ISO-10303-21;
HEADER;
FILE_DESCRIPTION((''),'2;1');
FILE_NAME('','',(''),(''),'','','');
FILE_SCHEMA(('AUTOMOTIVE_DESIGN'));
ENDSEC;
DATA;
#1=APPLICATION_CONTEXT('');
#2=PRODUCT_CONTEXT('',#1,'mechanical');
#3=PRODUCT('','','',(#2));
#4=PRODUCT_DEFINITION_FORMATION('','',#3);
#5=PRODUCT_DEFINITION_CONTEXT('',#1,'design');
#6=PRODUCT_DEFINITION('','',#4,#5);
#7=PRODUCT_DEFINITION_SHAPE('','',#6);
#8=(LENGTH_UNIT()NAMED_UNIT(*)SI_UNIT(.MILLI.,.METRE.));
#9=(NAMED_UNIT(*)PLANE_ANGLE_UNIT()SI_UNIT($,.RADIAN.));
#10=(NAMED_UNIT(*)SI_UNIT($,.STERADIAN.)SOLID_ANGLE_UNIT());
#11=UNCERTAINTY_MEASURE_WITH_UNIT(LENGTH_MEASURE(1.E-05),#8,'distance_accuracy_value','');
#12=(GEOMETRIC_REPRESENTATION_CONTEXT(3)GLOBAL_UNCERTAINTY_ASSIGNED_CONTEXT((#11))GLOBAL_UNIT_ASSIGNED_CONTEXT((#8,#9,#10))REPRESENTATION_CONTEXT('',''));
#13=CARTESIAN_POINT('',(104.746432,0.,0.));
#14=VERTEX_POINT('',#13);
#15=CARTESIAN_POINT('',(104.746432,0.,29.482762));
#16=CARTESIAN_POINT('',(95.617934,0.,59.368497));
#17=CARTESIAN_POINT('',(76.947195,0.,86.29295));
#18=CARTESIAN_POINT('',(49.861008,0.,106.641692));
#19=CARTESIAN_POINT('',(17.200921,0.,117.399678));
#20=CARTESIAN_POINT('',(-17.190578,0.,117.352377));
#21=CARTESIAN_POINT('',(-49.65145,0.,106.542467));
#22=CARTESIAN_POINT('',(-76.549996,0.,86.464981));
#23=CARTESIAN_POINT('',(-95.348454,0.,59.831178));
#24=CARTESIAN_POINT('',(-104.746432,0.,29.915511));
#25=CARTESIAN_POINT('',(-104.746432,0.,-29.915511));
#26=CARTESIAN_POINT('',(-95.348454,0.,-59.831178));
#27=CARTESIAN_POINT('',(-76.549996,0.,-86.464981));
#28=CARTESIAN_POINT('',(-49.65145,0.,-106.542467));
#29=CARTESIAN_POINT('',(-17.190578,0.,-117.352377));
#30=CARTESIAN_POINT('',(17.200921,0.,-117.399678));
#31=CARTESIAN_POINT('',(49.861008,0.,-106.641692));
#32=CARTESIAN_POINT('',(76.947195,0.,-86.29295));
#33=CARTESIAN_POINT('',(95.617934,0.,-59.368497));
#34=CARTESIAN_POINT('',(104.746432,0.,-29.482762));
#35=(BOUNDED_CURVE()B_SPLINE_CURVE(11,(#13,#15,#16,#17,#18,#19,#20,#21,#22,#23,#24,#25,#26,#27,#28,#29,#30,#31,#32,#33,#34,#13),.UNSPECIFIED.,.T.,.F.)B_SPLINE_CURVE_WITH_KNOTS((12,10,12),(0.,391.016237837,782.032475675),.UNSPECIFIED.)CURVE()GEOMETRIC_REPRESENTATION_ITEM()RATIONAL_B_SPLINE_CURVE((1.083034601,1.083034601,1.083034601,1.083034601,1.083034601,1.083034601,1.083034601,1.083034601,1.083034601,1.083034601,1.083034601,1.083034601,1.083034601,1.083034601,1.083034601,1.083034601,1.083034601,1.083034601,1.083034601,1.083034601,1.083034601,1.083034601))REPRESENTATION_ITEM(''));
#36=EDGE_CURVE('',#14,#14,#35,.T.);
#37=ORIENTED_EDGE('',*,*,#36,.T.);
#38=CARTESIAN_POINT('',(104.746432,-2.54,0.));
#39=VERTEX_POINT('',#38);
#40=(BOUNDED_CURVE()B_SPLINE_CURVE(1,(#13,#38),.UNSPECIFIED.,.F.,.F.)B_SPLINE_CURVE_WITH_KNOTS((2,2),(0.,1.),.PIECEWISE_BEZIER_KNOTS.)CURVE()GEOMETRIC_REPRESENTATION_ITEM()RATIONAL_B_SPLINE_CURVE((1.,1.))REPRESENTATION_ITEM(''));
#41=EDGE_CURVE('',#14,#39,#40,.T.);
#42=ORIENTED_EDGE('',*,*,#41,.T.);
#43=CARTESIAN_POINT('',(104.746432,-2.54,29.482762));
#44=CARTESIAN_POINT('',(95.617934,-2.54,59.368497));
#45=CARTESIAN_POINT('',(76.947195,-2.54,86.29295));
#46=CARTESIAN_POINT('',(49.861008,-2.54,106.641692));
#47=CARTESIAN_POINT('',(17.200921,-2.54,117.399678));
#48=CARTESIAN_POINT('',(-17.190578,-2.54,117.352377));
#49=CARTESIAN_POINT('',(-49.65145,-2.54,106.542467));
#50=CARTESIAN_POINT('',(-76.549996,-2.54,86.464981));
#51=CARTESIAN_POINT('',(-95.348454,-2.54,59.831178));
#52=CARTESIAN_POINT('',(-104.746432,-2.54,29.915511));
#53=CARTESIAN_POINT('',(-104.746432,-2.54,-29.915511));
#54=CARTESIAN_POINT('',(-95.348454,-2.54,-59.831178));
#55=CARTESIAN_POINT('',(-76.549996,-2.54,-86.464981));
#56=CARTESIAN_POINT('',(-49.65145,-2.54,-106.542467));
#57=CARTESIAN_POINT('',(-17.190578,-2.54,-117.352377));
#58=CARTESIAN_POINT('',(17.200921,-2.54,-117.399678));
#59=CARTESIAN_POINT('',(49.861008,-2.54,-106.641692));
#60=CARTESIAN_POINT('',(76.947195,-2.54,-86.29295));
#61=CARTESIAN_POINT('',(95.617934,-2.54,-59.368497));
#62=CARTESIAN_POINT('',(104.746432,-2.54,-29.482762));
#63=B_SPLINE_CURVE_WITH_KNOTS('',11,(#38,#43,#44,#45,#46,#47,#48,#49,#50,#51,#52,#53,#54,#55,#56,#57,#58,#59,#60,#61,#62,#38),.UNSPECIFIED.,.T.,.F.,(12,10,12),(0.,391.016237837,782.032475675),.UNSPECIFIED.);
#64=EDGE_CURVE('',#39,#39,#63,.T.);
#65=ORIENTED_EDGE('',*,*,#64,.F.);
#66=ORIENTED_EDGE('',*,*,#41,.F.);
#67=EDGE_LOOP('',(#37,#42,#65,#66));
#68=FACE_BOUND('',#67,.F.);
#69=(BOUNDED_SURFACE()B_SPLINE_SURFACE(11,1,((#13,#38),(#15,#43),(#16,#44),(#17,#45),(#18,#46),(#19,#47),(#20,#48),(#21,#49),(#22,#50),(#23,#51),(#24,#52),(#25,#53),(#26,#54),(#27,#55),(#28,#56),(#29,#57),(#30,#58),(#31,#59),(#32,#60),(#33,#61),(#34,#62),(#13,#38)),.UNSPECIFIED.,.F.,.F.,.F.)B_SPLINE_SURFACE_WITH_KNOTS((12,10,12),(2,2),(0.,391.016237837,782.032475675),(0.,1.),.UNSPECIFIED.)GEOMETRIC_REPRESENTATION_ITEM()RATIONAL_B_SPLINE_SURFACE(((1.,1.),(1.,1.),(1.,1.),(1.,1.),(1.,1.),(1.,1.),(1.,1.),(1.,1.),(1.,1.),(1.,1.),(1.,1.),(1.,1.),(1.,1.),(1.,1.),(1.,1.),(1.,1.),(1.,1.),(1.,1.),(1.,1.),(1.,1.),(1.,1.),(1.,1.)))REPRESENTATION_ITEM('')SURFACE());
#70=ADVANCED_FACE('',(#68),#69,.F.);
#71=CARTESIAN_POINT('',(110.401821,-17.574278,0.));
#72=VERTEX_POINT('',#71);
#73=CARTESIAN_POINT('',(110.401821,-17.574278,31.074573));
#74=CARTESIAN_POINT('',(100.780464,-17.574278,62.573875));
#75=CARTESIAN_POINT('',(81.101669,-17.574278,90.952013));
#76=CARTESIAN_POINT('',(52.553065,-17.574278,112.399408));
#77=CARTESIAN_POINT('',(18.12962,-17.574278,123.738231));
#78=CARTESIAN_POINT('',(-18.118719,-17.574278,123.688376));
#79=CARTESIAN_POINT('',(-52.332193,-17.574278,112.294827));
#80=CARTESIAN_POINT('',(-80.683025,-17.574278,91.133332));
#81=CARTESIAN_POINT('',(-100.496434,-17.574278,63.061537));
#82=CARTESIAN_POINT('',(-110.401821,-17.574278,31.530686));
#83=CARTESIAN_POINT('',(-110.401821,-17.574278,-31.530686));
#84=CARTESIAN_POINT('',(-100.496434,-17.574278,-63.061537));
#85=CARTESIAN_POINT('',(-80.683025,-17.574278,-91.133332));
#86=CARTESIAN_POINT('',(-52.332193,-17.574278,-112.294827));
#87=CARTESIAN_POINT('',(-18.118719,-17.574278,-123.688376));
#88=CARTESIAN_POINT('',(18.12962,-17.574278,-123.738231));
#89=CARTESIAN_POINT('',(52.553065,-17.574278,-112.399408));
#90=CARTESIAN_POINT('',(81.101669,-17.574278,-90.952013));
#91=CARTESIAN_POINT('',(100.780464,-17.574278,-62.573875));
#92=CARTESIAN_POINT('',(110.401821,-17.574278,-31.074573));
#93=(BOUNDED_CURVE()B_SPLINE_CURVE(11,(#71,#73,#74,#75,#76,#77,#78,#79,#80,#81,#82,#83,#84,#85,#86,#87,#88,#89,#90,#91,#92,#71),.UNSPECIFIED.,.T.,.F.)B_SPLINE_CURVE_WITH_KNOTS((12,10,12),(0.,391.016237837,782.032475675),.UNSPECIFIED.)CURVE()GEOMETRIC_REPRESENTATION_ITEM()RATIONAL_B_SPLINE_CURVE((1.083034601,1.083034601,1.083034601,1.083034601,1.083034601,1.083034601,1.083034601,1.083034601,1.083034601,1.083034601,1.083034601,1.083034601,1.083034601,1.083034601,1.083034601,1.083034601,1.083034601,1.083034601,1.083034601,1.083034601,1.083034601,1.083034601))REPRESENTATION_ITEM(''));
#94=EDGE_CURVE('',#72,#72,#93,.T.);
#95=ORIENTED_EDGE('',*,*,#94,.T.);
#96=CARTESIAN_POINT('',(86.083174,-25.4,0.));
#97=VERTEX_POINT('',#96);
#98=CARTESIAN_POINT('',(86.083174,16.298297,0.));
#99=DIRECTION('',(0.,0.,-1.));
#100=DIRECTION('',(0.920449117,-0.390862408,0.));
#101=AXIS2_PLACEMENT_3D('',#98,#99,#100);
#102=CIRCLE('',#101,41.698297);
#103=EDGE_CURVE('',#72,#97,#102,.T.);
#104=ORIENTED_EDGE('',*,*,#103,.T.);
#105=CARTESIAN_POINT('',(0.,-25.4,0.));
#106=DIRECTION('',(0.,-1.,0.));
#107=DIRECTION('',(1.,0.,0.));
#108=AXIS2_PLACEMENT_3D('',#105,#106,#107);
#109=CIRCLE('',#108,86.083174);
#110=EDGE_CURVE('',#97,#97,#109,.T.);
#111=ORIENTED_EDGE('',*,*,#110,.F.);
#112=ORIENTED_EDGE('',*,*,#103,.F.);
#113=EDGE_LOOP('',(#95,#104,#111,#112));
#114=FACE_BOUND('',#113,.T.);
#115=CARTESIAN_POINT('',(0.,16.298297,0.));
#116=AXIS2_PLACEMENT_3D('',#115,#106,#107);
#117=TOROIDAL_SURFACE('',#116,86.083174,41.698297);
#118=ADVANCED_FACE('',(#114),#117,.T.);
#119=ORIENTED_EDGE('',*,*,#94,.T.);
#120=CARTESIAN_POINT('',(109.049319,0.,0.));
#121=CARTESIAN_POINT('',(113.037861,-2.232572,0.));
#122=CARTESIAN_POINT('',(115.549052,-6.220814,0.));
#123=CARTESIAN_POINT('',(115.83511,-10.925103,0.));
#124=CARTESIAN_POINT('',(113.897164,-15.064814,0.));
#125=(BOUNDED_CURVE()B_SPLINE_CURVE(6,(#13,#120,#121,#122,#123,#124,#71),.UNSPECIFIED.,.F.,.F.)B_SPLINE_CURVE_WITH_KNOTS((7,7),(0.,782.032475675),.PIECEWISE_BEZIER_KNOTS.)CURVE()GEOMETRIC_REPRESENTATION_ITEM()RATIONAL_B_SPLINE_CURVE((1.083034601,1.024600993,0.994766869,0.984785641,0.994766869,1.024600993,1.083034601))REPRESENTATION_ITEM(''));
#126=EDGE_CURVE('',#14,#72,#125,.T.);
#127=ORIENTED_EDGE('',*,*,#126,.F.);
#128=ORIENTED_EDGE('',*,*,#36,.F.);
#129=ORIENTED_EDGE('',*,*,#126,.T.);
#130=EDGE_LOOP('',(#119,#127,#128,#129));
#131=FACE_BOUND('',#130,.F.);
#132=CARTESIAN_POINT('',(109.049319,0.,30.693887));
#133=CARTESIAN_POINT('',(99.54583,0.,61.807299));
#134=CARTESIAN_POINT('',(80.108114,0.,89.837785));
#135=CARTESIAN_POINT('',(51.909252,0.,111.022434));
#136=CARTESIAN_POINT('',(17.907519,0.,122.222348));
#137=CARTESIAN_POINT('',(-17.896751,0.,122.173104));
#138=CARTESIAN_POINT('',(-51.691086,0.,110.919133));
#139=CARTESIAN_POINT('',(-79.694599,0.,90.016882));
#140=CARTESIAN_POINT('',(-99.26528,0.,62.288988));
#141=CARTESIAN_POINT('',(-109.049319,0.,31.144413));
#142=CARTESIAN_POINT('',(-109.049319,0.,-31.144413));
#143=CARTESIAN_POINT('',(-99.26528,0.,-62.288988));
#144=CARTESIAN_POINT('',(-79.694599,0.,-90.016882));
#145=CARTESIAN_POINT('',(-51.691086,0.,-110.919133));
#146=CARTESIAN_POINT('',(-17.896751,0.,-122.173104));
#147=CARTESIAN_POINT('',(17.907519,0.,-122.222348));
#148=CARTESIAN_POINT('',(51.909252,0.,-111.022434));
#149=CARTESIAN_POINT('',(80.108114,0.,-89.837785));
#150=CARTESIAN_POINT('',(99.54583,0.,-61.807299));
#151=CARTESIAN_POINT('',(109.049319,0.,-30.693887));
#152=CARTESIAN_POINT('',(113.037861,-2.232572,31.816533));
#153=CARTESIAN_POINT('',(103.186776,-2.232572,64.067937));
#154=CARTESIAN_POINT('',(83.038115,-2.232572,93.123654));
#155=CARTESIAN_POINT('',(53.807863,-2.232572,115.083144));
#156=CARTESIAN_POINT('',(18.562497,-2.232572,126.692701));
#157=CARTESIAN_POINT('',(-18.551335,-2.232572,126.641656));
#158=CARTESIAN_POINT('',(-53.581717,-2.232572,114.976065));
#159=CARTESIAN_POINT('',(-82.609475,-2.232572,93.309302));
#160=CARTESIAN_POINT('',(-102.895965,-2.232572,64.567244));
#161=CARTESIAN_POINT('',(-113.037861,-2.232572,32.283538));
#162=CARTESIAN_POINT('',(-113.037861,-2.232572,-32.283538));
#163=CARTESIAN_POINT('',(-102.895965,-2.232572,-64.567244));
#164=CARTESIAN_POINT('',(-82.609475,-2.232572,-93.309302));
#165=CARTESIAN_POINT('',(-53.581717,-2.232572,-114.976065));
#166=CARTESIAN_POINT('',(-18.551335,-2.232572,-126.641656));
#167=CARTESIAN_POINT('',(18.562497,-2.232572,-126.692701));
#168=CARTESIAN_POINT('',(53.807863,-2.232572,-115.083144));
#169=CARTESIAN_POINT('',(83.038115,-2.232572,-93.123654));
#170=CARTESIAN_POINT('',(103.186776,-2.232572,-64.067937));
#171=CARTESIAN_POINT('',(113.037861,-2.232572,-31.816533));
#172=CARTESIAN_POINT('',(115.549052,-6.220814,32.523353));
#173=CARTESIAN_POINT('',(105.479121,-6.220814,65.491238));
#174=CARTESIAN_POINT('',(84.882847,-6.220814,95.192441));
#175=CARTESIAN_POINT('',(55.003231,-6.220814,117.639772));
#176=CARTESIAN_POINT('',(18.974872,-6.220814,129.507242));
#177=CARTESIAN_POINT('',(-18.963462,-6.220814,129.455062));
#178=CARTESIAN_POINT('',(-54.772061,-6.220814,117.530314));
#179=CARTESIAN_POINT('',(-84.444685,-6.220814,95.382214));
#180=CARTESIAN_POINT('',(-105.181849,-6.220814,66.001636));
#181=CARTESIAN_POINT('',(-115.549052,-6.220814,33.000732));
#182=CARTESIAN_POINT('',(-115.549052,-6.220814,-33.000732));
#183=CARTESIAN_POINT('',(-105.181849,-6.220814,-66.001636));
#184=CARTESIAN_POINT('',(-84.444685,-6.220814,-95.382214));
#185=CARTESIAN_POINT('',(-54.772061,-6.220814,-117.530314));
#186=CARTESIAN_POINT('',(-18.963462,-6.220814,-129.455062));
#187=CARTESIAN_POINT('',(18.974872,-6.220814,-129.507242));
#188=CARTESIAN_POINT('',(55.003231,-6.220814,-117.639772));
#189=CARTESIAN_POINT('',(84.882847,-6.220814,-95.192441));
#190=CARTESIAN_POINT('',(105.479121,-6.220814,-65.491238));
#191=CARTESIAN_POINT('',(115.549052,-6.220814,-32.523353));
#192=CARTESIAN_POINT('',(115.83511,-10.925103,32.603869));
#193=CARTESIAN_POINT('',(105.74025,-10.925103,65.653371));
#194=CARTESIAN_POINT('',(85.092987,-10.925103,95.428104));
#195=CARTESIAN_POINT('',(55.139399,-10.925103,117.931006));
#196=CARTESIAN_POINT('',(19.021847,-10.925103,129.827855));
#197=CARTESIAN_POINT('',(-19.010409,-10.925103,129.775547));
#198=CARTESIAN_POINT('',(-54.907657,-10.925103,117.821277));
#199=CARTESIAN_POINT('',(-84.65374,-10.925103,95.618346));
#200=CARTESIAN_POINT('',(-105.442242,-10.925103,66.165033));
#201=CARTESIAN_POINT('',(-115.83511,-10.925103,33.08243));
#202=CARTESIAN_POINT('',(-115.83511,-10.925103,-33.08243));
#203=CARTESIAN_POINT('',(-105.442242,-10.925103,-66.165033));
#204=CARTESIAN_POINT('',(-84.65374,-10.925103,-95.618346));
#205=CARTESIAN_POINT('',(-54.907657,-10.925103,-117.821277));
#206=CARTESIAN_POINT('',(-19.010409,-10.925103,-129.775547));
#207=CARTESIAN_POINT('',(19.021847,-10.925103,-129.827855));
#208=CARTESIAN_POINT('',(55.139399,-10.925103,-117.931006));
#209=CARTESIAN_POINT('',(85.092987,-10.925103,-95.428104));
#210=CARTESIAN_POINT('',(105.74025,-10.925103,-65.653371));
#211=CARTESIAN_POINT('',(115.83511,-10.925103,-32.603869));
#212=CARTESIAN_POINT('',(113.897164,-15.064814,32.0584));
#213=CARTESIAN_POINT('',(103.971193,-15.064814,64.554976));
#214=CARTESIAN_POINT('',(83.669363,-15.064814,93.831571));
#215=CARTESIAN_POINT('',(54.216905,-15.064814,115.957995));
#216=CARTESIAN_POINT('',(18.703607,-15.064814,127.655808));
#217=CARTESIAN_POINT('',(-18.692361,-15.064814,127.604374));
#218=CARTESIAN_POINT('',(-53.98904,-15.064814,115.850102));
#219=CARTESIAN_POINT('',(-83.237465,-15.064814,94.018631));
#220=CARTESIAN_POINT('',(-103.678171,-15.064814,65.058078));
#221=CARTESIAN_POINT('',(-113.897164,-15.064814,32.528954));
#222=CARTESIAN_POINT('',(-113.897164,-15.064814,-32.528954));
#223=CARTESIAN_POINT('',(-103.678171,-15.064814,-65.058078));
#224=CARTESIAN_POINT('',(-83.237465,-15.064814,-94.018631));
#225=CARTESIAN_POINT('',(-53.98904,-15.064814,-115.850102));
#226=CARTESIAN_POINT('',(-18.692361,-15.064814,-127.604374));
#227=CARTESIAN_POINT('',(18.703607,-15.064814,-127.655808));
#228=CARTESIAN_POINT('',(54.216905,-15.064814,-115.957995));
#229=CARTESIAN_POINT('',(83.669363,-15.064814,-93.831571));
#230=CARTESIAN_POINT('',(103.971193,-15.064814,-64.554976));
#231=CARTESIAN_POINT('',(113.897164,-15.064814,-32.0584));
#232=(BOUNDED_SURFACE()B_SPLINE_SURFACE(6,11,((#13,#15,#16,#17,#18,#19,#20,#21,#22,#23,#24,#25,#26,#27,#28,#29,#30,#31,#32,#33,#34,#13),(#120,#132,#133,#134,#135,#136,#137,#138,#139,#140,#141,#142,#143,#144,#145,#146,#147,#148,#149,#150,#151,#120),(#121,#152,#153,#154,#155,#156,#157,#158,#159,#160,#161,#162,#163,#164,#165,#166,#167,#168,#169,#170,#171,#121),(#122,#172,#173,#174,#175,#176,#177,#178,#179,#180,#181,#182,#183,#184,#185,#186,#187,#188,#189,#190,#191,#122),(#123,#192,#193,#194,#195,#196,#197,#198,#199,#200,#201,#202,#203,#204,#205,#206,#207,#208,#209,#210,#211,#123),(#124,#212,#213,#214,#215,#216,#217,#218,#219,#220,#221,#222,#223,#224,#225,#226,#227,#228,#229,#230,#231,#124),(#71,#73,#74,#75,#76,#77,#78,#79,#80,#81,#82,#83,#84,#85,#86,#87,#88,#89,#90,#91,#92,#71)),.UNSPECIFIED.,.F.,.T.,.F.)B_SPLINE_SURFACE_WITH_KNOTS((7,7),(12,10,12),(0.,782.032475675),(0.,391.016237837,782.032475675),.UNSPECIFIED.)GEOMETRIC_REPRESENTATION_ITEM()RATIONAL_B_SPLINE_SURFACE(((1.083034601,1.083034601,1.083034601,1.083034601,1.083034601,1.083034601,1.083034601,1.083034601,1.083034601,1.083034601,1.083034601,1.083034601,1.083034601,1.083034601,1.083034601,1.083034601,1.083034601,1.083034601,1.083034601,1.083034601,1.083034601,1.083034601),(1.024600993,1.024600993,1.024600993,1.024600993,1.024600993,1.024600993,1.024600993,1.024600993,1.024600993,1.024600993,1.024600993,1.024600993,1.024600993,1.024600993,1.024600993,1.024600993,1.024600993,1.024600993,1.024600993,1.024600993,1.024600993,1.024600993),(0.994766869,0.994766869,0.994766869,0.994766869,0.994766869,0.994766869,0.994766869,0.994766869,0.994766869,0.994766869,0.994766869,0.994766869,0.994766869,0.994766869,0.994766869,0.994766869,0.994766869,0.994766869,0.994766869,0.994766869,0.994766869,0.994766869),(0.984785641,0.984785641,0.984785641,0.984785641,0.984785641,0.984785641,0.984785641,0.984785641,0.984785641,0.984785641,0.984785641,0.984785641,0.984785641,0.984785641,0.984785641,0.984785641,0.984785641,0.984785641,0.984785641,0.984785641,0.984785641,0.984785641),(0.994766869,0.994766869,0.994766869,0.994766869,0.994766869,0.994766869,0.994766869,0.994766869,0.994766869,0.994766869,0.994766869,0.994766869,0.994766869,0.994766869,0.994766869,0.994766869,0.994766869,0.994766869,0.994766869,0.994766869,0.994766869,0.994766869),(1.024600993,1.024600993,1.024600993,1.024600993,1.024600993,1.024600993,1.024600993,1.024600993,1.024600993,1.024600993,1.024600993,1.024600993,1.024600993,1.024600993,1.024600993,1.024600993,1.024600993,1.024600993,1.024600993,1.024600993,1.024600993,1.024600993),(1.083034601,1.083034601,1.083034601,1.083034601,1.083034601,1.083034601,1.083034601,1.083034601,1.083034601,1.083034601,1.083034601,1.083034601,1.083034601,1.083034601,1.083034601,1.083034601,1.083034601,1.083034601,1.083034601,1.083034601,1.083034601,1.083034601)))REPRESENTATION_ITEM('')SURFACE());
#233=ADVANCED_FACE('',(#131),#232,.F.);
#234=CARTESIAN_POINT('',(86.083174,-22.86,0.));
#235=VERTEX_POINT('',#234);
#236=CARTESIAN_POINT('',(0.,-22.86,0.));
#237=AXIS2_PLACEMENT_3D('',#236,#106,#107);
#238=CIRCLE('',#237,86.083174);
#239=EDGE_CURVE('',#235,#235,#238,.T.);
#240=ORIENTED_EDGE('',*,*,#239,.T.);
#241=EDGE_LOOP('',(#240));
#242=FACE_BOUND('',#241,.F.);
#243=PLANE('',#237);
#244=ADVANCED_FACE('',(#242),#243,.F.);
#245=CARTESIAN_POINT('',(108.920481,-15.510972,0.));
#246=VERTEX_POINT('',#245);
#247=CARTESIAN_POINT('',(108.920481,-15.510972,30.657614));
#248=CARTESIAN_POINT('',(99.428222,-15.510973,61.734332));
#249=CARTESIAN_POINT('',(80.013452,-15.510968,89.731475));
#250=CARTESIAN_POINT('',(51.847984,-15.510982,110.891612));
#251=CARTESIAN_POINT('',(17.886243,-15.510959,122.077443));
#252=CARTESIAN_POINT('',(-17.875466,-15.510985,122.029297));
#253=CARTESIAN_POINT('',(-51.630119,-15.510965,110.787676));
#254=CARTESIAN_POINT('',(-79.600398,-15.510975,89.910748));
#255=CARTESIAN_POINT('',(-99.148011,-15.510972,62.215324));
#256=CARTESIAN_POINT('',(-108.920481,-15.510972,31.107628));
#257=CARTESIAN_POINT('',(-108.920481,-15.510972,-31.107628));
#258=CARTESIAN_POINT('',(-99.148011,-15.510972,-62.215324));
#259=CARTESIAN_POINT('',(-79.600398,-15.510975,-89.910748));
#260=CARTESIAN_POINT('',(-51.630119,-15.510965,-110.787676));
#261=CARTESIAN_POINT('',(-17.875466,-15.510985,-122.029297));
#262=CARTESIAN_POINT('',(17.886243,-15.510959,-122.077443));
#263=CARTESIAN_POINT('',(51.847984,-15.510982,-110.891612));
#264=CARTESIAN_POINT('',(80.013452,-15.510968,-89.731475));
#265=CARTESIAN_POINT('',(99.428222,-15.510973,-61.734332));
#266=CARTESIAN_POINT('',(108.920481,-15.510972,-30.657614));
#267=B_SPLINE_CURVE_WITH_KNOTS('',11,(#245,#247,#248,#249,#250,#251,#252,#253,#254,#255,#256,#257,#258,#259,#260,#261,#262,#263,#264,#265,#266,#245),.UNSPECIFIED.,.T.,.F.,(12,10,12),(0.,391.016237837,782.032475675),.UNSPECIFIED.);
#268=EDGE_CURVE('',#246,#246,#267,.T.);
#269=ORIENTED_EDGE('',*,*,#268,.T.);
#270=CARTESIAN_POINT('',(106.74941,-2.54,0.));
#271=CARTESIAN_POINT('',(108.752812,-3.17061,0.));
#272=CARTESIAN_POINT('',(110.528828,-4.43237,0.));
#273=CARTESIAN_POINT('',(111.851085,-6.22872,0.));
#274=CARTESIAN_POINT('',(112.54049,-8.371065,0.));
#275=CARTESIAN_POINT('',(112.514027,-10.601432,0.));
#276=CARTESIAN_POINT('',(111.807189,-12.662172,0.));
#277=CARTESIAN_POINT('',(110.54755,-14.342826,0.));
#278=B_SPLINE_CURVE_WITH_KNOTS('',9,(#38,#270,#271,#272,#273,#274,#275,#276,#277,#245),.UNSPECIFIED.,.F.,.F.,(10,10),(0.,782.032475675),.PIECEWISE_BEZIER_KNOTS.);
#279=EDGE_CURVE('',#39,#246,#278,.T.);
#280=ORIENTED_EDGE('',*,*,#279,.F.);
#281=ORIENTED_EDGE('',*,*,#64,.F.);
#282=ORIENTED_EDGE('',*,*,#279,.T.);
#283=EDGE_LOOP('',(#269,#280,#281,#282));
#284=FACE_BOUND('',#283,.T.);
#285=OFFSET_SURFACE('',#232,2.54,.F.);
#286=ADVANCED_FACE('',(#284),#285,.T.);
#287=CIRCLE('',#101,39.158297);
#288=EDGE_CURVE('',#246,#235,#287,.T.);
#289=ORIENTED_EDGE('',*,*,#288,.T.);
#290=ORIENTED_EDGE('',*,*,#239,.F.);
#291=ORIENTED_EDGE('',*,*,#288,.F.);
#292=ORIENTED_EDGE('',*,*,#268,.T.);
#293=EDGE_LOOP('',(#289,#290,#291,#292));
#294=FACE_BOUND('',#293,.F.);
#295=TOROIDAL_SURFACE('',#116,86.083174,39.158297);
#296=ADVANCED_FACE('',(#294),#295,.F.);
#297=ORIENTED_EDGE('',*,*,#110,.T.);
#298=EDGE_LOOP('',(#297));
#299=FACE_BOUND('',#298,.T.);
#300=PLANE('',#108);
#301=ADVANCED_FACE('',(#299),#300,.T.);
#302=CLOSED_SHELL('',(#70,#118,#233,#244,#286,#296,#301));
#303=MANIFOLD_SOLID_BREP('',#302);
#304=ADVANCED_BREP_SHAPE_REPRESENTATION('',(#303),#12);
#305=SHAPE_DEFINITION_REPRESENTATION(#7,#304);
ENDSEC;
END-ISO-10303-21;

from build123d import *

# Parameters (mm, degrees)
F2_R     = 124.464334162
F3_DEPTH = 25.4
F5_R     = 9.6970890036
F6_T     = 2.54


# Not quite as in the source:
# - a fillet or chamfer that OpenCascade refuses, or shapes differently, is made with other operations: its cross-section is extruded or revolved along the edge and cut away or added
# - a shell that OpenCascade refuses in one call is made with other operations: the cavity is built on its own and cut out


with BuildPart() as f3:
    # F2 (on Front) → F3 (new body)
    with BuildSketch(Plane.XZ):
        Circle(F2_R)
    extrude(amount=F3_DEPTH)

    # F4: fillet of radius 41.6982966493 on 1 edges, made by hand

    # F4_s1 → F4_t2 (revolve, cut)
    with BuildSketch(Plane.XY):
        with BuildLine():
            ThreePointArc((124.464334162, 0), (109.0955263093, -18.4749628471), (86.0831738123, -25.4))
            Line((86.0831738123, -25.4), (124.464334162, -25.4))
            Line((124.464334162, -25.4), (124.464334162, 0))
        make_face()
    revolve(axis=Axis((0, -25.4, 0), (0, -1, 0)), mode=Mode.SUBTRACT)

    # F5
    f5_edges = [f3.edges().sort_by_distance(p)[0] for p in [
        (-124.464334, 0, 0),
    ]]
    fillet(f5_edges, radius=F5_R)

    # F6: shell of thickness 2.54, made by hand


with BuildPart() as f6_core1:
    # F6_t2: copy of F3
    add(f3.part)

    # the walls: a layer under each face that stays
    f6_faces = [f6_core1.faces().sort_by_distance(p)[0] for p in [
        (-113.9773406634, -6.7265898841, 0),
        (-98.8565693577, -23.3953843301, 0),
        (0, -25.4, 0),
    ]]
    thicken(f6_faces, amount=-F6_T, mode=Mode.SUBTRACT)


with BuildPart() as f3_1:
    add(f3.part)

    # what is left inside the walls is the cavity
    f6_cavity = [f6_core1.part.solids().sort_by_distance(p)[0] for p in [
        (0, -0.0254, -39.133226),
    ]]
    add(f6_cavity, mode=Mode.SUBTRACT)


solid = f3_1.part
